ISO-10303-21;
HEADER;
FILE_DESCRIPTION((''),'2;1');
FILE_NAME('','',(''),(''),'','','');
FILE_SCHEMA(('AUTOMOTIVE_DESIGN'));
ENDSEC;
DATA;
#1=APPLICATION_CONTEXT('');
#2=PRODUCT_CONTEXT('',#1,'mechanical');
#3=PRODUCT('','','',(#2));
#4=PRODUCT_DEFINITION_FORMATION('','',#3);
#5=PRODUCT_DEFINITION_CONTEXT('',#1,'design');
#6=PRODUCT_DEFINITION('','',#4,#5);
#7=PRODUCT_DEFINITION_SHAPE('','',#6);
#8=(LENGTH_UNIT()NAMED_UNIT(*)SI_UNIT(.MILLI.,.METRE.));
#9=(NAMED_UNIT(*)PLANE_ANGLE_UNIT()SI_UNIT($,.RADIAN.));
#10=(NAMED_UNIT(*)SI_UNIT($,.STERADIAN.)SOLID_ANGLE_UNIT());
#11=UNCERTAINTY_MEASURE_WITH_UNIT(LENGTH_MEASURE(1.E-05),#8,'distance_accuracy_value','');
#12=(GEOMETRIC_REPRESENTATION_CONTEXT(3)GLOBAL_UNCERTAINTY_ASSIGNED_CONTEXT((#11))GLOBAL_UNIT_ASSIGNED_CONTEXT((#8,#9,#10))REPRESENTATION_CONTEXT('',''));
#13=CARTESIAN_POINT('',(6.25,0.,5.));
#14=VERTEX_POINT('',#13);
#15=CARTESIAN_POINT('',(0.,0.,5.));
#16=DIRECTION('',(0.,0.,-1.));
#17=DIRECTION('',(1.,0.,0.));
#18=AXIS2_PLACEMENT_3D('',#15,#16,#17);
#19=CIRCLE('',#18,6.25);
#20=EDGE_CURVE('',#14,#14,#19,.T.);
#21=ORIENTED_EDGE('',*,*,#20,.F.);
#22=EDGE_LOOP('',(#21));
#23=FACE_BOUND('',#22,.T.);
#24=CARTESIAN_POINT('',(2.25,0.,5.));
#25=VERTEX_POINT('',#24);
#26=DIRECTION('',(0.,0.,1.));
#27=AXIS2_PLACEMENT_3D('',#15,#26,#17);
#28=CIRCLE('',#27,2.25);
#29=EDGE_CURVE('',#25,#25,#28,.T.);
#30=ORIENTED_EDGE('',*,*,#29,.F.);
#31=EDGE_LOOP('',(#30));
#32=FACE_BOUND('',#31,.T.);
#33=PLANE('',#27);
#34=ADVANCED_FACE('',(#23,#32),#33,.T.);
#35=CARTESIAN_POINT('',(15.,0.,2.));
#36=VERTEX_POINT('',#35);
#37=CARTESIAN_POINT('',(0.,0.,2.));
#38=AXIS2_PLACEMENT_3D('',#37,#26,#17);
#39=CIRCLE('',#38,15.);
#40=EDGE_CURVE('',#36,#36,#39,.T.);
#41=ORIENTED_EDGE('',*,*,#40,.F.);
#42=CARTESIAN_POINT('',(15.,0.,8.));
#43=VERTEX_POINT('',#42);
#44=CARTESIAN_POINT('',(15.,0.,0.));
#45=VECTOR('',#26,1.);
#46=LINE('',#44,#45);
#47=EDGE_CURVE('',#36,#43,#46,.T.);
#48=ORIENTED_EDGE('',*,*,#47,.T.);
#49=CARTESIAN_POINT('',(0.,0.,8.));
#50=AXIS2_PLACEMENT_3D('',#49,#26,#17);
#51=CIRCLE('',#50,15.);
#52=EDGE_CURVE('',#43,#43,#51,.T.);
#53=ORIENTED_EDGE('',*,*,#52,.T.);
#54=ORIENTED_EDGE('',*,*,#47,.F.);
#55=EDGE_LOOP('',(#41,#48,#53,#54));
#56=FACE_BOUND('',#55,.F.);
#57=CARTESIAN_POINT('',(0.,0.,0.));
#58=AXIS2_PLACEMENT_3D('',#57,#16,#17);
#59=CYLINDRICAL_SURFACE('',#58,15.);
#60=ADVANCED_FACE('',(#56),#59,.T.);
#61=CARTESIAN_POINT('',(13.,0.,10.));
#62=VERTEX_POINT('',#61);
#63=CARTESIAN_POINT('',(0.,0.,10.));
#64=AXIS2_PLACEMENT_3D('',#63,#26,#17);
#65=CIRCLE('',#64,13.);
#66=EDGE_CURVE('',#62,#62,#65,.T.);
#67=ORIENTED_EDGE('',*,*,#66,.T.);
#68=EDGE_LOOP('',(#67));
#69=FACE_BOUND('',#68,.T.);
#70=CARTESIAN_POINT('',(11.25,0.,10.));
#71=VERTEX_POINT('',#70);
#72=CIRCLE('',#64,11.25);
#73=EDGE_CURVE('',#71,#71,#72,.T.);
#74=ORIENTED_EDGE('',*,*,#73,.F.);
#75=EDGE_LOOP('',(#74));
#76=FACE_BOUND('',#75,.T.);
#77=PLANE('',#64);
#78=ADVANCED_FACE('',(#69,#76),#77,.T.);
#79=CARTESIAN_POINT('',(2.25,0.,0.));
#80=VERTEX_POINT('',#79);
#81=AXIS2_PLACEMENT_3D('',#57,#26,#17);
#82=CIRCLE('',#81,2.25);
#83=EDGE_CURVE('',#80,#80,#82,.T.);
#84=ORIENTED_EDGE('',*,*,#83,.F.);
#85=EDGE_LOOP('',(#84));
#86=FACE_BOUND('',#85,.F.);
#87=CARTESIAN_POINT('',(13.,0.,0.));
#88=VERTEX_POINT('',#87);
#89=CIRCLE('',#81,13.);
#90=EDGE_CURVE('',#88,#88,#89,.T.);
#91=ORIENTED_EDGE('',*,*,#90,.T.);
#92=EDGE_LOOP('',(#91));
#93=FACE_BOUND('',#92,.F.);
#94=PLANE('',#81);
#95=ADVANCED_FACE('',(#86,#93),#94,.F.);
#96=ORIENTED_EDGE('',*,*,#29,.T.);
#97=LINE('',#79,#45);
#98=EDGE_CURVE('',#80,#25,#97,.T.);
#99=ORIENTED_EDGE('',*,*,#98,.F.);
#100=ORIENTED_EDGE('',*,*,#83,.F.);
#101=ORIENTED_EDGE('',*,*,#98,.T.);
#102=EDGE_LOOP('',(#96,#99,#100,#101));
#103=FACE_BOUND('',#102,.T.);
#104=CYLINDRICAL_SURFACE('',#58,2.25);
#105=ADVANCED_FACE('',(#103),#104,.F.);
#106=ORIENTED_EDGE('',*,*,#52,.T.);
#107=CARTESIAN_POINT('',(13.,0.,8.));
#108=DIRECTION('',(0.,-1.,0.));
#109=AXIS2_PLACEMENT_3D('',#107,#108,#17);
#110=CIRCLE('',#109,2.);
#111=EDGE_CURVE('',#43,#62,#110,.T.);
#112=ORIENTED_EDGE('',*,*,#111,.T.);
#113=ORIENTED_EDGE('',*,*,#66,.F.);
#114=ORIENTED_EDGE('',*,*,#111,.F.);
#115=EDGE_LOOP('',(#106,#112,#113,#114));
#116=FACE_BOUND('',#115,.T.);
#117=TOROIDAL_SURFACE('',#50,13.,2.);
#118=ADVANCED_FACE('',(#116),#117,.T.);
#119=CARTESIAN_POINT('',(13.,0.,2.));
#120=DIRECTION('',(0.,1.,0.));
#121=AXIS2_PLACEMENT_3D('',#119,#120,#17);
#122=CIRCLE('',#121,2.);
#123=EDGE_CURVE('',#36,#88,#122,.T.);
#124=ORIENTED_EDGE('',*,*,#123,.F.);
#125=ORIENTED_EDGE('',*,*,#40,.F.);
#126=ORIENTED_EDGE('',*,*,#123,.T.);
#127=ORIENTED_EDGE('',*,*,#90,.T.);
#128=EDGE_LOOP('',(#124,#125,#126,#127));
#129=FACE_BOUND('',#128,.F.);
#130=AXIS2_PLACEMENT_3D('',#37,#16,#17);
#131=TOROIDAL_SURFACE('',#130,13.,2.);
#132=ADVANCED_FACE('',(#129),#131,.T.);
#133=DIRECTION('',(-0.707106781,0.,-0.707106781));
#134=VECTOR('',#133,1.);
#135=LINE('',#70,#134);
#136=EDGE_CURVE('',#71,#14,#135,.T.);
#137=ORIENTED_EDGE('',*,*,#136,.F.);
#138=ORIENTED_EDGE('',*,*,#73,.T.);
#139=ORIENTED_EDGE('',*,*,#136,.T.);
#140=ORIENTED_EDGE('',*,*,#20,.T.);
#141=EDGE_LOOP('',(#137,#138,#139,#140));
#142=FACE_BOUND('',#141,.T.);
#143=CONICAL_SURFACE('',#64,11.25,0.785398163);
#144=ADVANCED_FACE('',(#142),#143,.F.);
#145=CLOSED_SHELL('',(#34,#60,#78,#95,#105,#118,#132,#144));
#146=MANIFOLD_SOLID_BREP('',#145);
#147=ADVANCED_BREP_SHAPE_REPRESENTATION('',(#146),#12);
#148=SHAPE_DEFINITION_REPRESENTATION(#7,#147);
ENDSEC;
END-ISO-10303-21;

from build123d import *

# Parameters (mm, degrees)
F0_R     = 15
F0_R_2   = 11
F0_R_3   = 4.25
F1_DEPTH = 10
F2_R     = 2
F0_R_4   = 2.25
F3_DEPTH = 5


# Not quite as in the source:
# - a fillet or chamfer that OpenCascade refuses, or shapes differently, is made with other operations: its cross-section is extruded or revolved along the edge and cut away or added


with BuildPart() as f1:
    # F0 (on Top) → F1 (new body)
    with BuildSketch(Plane.XY):
        Circle(F0_R)
        Circle(F0_R_2, mode=Mode.SUBTRACT)
        Circle(F0_R_2)
        Circle(F0_R_3, mode=Mode.SUBTRACT)
    extrude(amount=F1_DEPTH)

    # F2
    f2_edges = [f1.edges().sort_by_distance(p)[0] for p in [
        (-15, 0, 10),
        (15, 0, 5),
        (-15, 0, 0),
    ]]
    fillet(f2_edges, radius=F2_R)

    # F0 (on Top) → F3 (join)
    with BuildSketch(Plane.XY):
        Circle(F0_R_3)
        Circle(F0_R_4, mode=Mode.SUBTRACT)
    extrude(amount=F3_DEPTH)

    # F4: chamfer of 7 on 1 edges, made by hand


with BuildPart() as f4_tool2:
    # F4_s3 → F4_t4 (revolve)
    with BuildSketch(Plane.XZ):
        Polygon((11.25, 10), (4.25, 3), (4.25, 10), align=None)
    revolve(axis=Axis((0, 0, 10), (0, 0, 1)))

    split(bisect_by=Plane.XY.offset(5), keep=Keep.TOP)


with BuildPart() as f1_1:
    add(f1.part)

    # F4_t1: cut F4_tool2
    add(f4_tool2.part, mode=Mode.SUBTRACT)


solid = f1_1.part
